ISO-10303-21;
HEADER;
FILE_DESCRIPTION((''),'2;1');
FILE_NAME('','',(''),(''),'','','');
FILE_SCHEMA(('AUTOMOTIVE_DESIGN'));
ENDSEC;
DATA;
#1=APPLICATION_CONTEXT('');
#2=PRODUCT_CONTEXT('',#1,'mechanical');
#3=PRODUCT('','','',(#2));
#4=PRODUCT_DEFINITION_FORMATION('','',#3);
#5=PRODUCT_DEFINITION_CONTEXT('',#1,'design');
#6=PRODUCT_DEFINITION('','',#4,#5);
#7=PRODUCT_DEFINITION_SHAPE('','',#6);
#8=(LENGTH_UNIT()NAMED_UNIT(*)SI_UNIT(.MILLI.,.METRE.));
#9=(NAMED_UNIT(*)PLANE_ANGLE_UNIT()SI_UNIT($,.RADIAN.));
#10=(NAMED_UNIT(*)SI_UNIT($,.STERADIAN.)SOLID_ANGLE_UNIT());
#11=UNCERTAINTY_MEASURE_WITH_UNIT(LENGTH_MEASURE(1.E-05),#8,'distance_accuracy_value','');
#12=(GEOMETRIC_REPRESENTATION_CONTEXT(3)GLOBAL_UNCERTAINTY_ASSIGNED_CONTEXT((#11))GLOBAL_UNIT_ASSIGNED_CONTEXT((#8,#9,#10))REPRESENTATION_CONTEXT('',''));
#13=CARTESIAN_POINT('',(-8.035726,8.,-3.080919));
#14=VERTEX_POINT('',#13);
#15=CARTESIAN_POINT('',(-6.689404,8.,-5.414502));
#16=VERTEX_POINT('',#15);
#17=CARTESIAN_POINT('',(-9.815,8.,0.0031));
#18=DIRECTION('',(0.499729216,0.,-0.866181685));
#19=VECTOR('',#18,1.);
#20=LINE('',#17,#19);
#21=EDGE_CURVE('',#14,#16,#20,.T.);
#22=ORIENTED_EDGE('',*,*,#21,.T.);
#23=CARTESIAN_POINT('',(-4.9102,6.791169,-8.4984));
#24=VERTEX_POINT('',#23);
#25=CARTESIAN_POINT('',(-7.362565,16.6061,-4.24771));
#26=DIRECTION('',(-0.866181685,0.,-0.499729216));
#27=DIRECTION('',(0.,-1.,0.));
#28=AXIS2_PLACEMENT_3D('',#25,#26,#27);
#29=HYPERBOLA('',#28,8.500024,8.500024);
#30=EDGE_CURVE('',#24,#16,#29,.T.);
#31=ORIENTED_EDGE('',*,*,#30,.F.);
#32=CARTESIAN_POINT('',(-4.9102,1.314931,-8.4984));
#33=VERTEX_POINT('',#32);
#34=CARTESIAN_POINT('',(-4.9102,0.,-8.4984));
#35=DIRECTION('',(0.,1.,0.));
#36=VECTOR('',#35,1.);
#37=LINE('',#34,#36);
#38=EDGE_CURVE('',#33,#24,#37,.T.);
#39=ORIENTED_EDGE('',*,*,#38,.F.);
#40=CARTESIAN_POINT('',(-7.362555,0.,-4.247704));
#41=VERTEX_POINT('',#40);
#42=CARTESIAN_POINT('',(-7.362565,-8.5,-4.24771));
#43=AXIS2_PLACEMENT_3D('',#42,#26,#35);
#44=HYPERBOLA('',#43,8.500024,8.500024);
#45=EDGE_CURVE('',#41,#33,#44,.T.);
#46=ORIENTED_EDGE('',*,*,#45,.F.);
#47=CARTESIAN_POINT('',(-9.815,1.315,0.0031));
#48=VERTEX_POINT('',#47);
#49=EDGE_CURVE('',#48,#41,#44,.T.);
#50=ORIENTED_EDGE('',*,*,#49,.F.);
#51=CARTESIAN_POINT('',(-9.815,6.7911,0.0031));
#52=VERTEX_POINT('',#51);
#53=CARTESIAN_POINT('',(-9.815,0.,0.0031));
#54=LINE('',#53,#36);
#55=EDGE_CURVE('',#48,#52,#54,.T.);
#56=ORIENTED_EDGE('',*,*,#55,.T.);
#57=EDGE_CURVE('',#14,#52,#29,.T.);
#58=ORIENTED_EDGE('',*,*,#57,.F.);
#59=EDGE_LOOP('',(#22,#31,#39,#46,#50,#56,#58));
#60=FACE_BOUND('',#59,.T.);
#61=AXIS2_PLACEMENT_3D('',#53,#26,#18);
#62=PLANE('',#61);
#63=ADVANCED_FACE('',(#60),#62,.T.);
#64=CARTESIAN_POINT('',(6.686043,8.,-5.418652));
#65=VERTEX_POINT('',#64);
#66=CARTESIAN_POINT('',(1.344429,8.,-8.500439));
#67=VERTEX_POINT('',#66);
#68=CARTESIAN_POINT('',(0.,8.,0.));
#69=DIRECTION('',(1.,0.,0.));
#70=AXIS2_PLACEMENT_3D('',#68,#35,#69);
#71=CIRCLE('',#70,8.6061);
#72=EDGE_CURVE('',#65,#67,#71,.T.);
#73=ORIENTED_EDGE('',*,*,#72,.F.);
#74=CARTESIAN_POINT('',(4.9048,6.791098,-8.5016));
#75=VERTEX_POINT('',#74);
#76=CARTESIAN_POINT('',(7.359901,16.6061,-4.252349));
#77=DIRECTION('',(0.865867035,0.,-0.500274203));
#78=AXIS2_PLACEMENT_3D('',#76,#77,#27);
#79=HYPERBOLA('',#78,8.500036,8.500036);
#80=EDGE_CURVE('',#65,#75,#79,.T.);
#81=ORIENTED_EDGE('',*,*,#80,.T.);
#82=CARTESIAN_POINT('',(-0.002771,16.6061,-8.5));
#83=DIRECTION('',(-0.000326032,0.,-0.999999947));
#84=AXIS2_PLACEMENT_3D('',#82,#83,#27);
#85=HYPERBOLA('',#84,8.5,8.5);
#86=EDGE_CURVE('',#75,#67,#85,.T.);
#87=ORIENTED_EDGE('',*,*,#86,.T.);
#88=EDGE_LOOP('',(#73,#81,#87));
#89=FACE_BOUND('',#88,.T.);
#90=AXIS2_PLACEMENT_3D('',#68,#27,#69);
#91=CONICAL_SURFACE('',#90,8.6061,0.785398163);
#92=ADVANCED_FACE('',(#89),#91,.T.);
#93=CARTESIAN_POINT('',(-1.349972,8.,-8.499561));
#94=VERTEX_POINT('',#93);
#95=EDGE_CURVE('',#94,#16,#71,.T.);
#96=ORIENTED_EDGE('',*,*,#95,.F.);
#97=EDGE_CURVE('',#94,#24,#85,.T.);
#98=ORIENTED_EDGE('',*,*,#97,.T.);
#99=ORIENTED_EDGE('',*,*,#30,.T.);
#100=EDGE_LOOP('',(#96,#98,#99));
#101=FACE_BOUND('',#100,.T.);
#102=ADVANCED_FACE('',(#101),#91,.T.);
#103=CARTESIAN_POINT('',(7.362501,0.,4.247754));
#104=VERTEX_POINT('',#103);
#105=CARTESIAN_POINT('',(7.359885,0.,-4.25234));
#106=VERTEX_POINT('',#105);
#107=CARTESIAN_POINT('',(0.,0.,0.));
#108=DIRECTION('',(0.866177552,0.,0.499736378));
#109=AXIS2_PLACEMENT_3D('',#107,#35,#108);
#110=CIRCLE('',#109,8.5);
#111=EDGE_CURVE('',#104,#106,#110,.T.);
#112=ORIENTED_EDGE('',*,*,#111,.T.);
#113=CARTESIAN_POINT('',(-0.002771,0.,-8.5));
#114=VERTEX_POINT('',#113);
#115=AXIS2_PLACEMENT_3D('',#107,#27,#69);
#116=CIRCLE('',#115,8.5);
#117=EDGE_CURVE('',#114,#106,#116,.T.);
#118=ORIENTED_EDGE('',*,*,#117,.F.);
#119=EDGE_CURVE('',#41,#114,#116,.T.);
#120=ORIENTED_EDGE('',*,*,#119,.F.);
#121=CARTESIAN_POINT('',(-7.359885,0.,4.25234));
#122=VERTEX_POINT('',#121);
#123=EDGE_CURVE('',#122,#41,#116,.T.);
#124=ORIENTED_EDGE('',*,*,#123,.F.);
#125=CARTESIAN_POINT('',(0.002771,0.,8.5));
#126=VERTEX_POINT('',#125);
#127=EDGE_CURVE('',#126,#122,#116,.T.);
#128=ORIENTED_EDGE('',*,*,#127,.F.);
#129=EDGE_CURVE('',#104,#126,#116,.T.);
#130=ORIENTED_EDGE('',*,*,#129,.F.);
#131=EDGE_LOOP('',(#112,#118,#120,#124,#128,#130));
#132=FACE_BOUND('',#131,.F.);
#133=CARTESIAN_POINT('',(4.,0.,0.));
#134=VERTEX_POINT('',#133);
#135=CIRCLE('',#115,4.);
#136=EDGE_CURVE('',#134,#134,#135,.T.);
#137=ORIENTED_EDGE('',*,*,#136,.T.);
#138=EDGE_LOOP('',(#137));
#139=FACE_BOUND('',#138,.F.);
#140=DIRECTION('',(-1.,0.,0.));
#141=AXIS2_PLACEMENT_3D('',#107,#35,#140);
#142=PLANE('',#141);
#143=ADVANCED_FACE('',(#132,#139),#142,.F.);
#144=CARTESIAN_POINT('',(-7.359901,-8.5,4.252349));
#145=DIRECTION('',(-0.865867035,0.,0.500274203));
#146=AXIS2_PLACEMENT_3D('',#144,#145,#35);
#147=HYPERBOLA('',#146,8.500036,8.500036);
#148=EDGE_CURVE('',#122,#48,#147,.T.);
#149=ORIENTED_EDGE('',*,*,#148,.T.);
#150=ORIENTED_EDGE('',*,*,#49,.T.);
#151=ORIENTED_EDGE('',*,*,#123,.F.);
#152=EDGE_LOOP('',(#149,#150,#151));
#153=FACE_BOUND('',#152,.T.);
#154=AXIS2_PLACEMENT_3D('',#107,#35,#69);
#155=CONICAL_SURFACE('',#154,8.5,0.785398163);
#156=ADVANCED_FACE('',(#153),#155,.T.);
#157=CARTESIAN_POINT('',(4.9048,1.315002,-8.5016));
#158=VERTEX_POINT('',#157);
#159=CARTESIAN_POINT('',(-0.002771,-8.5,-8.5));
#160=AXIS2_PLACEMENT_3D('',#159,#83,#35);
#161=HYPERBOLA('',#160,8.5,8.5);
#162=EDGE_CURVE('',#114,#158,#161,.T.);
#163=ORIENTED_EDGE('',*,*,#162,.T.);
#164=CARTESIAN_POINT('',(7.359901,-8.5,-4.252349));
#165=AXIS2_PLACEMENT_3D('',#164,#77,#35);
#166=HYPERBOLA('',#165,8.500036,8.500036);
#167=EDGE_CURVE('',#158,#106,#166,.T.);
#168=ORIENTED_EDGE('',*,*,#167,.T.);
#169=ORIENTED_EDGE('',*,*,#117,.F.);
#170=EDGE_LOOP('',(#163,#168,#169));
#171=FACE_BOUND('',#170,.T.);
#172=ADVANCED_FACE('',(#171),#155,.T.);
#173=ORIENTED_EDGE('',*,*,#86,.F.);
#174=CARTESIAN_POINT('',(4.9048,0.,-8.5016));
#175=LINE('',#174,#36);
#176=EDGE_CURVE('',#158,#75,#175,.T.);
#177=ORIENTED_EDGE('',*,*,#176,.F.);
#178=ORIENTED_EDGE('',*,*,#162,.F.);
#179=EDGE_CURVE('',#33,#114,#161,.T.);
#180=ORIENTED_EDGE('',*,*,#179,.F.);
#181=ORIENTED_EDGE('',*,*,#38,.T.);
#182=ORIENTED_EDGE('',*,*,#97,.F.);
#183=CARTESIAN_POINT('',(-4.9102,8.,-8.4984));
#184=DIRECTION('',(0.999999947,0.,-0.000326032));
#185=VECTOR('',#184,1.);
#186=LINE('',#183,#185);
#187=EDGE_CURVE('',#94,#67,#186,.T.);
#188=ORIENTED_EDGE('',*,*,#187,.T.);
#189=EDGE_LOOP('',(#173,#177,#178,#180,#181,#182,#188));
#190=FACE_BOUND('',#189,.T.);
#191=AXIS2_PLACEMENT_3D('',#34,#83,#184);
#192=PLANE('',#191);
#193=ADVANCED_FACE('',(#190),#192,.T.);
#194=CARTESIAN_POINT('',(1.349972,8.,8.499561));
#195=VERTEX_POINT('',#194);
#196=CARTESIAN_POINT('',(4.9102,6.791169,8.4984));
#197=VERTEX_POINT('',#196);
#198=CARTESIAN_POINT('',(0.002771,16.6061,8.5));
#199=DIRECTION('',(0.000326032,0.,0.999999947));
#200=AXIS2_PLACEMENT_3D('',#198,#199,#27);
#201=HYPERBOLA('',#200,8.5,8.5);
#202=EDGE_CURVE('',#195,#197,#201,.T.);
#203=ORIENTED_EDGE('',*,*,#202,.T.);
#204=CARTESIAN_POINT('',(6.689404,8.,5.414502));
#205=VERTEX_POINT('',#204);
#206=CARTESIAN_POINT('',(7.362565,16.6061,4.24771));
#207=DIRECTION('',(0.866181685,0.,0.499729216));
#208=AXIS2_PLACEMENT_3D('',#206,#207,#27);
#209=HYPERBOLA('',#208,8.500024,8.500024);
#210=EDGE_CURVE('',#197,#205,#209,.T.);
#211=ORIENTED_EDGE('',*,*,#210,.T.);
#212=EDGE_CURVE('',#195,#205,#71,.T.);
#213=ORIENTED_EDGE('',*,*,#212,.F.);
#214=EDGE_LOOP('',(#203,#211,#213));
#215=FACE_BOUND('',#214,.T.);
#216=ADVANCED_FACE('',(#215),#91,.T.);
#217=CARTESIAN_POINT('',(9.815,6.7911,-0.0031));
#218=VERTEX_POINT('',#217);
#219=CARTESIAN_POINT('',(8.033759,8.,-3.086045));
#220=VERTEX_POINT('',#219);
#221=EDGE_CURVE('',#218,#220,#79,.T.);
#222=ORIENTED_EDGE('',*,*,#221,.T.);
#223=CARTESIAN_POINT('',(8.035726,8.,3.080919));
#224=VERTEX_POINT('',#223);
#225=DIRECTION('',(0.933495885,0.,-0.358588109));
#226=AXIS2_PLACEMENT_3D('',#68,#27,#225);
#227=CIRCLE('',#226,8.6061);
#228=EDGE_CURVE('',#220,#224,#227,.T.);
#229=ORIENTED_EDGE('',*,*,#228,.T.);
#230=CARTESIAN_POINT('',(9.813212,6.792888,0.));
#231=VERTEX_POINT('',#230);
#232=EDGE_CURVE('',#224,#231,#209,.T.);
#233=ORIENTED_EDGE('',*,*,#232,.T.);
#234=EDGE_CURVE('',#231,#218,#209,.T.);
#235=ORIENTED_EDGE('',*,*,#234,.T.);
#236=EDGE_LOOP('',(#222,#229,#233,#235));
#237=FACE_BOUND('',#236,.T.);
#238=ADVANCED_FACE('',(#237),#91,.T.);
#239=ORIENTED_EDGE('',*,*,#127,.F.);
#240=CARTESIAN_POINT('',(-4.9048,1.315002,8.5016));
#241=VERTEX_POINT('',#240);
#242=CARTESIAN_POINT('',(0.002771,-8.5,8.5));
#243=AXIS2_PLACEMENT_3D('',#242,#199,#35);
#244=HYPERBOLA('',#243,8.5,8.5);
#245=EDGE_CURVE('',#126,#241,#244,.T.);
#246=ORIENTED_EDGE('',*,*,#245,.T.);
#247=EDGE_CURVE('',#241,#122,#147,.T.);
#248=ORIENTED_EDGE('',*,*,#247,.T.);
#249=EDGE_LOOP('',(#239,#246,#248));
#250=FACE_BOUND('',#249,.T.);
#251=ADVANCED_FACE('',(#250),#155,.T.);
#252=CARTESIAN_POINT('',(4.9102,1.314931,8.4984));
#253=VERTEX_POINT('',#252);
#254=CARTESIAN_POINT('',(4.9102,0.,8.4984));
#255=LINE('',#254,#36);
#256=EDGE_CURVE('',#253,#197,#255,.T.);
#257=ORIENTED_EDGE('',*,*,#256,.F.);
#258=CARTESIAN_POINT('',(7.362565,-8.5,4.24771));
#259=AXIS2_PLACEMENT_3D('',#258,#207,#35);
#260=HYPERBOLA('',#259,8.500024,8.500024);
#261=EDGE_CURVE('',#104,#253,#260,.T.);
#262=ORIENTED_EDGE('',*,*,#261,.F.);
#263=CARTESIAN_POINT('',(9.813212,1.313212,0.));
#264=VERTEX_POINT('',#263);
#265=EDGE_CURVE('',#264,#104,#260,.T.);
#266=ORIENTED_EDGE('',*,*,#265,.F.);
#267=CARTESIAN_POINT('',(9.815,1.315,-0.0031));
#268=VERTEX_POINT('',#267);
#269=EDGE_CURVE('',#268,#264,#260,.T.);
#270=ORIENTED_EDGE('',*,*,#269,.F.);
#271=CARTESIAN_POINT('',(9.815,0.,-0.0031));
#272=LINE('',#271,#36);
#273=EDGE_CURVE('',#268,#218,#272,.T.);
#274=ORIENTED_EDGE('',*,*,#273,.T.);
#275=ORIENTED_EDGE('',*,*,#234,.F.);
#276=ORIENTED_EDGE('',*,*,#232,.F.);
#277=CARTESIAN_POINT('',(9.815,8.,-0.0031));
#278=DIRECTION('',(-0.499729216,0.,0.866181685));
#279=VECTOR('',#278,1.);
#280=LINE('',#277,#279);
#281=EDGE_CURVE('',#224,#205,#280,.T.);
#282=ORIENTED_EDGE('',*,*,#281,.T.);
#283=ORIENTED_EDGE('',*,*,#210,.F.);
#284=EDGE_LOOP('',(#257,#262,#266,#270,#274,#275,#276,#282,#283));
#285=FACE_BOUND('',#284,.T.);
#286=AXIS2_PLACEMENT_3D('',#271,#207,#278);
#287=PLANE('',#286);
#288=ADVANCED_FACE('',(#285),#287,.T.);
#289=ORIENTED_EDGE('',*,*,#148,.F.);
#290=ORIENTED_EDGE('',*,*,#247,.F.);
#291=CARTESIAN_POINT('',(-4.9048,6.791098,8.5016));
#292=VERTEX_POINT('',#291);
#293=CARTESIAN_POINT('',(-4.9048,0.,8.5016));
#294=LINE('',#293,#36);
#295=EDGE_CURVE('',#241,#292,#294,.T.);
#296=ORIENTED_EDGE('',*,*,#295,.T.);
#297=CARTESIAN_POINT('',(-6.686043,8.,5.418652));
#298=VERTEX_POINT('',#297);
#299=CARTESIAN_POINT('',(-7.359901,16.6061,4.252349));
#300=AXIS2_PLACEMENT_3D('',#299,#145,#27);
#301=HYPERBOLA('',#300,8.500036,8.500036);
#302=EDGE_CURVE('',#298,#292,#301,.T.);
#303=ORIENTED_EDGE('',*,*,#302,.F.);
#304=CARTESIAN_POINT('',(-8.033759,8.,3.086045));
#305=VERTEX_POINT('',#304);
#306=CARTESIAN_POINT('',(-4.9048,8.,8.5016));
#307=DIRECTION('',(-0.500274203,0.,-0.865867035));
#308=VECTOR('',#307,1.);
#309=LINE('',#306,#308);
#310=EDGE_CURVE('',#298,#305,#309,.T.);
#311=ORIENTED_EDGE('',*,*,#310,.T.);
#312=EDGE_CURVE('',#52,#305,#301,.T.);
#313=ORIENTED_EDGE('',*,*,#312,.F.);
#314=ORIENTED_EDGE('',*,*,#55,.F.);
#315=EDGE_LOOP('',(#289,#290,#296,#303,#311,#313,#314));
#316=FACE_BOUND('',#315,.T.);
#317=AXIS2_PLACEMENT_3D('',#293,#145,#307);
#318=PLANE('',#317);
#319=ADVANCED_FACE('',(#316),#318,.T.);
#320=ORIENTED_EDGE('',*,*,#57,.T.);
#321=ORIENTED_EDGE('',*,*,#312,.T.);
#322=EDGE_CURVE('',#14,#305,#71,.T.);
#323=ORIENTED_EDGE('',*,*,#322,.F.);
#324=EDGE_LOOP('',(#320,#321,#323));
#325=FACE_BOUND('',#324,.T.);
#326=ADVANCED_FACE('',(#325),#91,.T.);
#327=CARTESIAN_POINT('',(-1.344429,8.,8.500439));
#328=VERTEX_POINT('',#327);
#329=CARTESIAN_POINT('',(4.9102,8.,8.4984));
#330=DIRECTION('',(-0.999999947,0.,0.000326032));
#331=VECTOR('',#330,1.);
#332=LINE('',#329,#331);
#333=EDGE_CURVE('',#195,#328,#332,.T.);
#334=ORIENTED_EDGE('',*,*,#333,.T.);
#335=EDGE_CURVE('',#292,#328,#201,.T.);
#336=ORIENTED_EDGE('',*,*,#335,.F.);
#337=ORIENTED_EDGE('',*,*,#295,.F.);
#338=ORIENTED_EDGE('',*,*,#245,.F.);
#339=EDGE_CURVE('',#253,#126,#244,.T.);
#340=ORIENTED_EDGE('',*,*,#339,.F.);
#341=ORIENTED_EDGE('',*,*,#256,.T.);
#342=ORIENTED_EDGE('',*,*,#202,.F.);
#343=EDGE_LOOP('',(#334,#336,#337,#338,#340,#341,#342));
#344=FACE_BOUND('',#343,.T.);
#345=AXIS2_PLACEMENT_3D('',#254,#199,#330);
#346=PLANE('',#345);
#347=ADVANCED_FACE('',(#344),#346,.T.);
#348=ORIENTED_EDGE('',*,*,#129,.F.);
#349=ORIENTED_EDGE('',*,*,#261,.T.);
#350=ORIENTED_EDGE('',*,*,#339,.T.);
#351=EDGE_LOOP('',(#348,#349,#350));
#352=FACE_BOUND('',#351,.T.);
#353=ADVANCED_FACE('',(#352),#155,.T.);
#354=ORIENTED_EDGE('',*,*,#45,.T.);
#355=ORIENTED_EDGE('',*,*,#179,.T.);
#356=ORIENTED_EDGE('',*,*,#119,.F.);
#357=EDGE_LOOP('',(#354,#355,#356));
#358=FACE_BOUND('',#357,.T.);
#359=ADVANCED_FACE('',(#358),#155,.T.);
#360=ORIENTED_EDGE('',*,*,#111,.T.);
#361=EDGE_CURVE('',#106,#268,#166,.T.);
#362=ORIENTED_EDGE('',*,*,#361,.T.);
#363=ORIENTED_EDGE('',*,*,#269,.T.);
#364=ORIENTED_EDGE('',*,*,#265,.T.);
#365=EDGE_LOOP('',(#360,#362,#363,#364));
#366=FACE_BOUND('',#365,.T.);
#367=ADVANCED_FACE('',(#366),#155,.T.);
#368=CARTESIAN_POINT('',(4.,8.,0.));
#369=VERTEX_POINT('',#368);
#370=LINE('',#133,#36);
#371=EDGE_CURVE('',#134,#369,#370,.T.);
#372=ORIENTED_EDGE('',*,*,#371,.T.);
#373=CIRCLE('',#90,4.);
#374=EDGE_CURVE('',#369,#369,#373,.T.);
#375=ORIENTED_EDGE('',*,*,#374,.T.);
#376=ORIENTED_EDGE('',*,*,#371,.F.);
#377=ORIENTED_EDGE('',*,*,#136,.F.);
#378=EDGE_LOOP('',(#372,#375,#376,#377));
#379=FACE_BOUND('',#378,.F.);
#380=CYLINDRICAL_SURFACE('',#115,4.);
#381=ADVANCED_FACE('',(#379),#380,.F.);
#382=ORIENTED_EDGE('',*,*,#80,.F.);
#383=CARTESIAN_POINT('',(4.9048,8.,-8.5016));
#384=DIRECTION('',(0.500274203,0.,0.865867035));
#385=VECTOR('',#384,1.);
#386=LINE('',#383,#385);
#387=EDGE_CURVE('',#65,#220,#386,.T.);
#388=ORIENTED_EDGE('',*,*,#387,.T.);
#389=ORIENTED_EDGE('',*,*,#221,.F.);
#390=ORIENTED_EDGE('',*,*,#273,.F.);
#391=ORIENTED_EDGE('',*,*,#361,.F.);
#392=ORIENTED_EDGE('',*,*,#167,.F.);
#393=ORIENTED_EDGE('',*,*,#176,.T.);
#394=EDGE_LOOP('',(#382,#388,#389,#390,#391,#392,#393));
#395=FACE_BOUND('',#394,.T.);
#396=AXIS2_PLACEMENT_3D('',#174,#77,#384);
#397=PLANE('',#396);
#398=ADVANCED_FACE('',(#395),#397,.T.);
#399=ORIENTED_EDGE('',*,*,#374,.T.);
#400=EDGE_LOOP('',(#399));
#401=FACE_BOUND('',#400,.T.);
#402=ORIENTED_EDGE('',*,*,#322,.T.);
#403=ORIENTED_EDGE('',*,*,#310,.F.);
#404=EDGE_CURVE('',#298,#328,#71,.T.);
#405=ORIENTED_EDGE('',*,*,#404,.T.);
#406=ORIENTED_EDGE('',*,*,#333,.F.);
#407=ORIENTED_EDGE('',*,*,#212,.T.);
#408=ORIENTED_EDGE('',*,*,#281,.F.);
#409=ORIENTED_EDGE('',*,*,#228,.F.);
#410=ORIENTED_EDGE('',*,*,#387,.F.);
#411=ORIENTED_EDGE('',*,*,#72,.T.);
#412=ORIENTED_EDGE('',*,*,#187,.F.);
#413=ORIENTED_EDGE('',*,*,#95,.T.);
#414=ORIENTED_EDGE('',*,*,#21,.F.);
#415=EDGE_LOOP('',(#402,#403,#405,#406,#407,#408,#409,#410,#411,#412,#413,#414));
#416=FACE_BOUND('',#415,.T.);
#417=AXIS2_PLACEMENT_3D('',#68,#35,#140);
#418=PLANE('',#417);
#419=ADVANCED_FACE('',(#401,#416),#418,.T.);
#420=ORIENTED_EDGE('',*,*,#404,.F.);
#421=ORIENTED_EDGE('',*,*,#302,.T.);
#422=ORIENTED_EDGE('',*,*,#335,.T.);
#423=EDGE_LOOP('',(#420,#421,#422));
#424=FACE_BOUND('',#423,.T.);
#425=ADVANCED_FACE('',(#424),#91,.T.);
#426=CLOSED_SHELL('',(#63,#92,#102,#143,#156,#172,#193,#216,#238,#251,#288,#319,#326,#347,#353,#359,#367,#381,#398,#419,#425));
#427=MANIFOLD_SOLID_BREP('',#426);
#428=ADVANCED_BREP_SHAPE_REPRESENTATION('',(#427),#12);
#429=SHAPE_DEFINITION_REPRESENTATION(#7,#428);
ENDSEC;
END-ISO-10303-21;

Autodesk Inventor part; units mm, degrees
ref_plane "YZ Plane" through (0, 0, 0) normal (1, 0, 0) x (0, 1, 0)
ref_plane "XZ Plane" through (0, 0, 0) normal (0, 1, 0) x (-1, 0, 0)
ref_plane "XY Plane" through (0, 0, 0) normal (0, 0, 1) x (1, 0, 0)
sketch "Sketch3" plane through (0, 0, 0) normal (0, 1, 0) x (-1, 0, 0)
  line L0 (-4.9048, -8.5016) -> (-9.815, -0.0031)
  line L1 (-9.815, -0.0031) -> (-4.9102, 8.4984)
  line L2 (-4.9102, 8.4984) -> (4.9048, 8.5016)
  line L3 (4.9048, 8.5016) -> (9.815, 0.0031)
  line L4 (9.815, 0.0031) -> (4.9102, -8.4984)
  line L5 (4.9102, -8.4984) -> (-4.9048, -8.5016)
  point P0 (0, 0)
  point P1 (0, 0)
  dimension "d1" = 17
extrude "Extrusion1" add sketch "Sketch3" along normal blind 8
sketch "Sketch4" plane through (0, 8, 0) normal (0, 1, 0) x (1, 0, 0)
  circle A0 centre (0, 0) radius 8.6061
extrude "Extrusion2" cut sketch "Sketch4" against normal through all draft 45 keep common part
sketch "Sketch22" plane through (0, 0, 0) normal (0, -1, 0) x (1, 0, 0)
  circle A0 centre (0, 0) radius 8.5
  line L0 (6.6894, 5.4144) -> (8.0357, 3.0809) projected
extrude "Extrusion12" cut sketch "Sketch22" against normal blind 8 draft 45 keep common part
sketch "Sketch23" plane through (0, 0, 0) normal (0, -1, 0) x (1, 0, 0)
  circle A0 centre (0, 0) radius 4
  dimension "d111" = 8
extrude "Extrusion13" cut sketch "Sketch23" against normal blind 8
properties part number "Bolt"
